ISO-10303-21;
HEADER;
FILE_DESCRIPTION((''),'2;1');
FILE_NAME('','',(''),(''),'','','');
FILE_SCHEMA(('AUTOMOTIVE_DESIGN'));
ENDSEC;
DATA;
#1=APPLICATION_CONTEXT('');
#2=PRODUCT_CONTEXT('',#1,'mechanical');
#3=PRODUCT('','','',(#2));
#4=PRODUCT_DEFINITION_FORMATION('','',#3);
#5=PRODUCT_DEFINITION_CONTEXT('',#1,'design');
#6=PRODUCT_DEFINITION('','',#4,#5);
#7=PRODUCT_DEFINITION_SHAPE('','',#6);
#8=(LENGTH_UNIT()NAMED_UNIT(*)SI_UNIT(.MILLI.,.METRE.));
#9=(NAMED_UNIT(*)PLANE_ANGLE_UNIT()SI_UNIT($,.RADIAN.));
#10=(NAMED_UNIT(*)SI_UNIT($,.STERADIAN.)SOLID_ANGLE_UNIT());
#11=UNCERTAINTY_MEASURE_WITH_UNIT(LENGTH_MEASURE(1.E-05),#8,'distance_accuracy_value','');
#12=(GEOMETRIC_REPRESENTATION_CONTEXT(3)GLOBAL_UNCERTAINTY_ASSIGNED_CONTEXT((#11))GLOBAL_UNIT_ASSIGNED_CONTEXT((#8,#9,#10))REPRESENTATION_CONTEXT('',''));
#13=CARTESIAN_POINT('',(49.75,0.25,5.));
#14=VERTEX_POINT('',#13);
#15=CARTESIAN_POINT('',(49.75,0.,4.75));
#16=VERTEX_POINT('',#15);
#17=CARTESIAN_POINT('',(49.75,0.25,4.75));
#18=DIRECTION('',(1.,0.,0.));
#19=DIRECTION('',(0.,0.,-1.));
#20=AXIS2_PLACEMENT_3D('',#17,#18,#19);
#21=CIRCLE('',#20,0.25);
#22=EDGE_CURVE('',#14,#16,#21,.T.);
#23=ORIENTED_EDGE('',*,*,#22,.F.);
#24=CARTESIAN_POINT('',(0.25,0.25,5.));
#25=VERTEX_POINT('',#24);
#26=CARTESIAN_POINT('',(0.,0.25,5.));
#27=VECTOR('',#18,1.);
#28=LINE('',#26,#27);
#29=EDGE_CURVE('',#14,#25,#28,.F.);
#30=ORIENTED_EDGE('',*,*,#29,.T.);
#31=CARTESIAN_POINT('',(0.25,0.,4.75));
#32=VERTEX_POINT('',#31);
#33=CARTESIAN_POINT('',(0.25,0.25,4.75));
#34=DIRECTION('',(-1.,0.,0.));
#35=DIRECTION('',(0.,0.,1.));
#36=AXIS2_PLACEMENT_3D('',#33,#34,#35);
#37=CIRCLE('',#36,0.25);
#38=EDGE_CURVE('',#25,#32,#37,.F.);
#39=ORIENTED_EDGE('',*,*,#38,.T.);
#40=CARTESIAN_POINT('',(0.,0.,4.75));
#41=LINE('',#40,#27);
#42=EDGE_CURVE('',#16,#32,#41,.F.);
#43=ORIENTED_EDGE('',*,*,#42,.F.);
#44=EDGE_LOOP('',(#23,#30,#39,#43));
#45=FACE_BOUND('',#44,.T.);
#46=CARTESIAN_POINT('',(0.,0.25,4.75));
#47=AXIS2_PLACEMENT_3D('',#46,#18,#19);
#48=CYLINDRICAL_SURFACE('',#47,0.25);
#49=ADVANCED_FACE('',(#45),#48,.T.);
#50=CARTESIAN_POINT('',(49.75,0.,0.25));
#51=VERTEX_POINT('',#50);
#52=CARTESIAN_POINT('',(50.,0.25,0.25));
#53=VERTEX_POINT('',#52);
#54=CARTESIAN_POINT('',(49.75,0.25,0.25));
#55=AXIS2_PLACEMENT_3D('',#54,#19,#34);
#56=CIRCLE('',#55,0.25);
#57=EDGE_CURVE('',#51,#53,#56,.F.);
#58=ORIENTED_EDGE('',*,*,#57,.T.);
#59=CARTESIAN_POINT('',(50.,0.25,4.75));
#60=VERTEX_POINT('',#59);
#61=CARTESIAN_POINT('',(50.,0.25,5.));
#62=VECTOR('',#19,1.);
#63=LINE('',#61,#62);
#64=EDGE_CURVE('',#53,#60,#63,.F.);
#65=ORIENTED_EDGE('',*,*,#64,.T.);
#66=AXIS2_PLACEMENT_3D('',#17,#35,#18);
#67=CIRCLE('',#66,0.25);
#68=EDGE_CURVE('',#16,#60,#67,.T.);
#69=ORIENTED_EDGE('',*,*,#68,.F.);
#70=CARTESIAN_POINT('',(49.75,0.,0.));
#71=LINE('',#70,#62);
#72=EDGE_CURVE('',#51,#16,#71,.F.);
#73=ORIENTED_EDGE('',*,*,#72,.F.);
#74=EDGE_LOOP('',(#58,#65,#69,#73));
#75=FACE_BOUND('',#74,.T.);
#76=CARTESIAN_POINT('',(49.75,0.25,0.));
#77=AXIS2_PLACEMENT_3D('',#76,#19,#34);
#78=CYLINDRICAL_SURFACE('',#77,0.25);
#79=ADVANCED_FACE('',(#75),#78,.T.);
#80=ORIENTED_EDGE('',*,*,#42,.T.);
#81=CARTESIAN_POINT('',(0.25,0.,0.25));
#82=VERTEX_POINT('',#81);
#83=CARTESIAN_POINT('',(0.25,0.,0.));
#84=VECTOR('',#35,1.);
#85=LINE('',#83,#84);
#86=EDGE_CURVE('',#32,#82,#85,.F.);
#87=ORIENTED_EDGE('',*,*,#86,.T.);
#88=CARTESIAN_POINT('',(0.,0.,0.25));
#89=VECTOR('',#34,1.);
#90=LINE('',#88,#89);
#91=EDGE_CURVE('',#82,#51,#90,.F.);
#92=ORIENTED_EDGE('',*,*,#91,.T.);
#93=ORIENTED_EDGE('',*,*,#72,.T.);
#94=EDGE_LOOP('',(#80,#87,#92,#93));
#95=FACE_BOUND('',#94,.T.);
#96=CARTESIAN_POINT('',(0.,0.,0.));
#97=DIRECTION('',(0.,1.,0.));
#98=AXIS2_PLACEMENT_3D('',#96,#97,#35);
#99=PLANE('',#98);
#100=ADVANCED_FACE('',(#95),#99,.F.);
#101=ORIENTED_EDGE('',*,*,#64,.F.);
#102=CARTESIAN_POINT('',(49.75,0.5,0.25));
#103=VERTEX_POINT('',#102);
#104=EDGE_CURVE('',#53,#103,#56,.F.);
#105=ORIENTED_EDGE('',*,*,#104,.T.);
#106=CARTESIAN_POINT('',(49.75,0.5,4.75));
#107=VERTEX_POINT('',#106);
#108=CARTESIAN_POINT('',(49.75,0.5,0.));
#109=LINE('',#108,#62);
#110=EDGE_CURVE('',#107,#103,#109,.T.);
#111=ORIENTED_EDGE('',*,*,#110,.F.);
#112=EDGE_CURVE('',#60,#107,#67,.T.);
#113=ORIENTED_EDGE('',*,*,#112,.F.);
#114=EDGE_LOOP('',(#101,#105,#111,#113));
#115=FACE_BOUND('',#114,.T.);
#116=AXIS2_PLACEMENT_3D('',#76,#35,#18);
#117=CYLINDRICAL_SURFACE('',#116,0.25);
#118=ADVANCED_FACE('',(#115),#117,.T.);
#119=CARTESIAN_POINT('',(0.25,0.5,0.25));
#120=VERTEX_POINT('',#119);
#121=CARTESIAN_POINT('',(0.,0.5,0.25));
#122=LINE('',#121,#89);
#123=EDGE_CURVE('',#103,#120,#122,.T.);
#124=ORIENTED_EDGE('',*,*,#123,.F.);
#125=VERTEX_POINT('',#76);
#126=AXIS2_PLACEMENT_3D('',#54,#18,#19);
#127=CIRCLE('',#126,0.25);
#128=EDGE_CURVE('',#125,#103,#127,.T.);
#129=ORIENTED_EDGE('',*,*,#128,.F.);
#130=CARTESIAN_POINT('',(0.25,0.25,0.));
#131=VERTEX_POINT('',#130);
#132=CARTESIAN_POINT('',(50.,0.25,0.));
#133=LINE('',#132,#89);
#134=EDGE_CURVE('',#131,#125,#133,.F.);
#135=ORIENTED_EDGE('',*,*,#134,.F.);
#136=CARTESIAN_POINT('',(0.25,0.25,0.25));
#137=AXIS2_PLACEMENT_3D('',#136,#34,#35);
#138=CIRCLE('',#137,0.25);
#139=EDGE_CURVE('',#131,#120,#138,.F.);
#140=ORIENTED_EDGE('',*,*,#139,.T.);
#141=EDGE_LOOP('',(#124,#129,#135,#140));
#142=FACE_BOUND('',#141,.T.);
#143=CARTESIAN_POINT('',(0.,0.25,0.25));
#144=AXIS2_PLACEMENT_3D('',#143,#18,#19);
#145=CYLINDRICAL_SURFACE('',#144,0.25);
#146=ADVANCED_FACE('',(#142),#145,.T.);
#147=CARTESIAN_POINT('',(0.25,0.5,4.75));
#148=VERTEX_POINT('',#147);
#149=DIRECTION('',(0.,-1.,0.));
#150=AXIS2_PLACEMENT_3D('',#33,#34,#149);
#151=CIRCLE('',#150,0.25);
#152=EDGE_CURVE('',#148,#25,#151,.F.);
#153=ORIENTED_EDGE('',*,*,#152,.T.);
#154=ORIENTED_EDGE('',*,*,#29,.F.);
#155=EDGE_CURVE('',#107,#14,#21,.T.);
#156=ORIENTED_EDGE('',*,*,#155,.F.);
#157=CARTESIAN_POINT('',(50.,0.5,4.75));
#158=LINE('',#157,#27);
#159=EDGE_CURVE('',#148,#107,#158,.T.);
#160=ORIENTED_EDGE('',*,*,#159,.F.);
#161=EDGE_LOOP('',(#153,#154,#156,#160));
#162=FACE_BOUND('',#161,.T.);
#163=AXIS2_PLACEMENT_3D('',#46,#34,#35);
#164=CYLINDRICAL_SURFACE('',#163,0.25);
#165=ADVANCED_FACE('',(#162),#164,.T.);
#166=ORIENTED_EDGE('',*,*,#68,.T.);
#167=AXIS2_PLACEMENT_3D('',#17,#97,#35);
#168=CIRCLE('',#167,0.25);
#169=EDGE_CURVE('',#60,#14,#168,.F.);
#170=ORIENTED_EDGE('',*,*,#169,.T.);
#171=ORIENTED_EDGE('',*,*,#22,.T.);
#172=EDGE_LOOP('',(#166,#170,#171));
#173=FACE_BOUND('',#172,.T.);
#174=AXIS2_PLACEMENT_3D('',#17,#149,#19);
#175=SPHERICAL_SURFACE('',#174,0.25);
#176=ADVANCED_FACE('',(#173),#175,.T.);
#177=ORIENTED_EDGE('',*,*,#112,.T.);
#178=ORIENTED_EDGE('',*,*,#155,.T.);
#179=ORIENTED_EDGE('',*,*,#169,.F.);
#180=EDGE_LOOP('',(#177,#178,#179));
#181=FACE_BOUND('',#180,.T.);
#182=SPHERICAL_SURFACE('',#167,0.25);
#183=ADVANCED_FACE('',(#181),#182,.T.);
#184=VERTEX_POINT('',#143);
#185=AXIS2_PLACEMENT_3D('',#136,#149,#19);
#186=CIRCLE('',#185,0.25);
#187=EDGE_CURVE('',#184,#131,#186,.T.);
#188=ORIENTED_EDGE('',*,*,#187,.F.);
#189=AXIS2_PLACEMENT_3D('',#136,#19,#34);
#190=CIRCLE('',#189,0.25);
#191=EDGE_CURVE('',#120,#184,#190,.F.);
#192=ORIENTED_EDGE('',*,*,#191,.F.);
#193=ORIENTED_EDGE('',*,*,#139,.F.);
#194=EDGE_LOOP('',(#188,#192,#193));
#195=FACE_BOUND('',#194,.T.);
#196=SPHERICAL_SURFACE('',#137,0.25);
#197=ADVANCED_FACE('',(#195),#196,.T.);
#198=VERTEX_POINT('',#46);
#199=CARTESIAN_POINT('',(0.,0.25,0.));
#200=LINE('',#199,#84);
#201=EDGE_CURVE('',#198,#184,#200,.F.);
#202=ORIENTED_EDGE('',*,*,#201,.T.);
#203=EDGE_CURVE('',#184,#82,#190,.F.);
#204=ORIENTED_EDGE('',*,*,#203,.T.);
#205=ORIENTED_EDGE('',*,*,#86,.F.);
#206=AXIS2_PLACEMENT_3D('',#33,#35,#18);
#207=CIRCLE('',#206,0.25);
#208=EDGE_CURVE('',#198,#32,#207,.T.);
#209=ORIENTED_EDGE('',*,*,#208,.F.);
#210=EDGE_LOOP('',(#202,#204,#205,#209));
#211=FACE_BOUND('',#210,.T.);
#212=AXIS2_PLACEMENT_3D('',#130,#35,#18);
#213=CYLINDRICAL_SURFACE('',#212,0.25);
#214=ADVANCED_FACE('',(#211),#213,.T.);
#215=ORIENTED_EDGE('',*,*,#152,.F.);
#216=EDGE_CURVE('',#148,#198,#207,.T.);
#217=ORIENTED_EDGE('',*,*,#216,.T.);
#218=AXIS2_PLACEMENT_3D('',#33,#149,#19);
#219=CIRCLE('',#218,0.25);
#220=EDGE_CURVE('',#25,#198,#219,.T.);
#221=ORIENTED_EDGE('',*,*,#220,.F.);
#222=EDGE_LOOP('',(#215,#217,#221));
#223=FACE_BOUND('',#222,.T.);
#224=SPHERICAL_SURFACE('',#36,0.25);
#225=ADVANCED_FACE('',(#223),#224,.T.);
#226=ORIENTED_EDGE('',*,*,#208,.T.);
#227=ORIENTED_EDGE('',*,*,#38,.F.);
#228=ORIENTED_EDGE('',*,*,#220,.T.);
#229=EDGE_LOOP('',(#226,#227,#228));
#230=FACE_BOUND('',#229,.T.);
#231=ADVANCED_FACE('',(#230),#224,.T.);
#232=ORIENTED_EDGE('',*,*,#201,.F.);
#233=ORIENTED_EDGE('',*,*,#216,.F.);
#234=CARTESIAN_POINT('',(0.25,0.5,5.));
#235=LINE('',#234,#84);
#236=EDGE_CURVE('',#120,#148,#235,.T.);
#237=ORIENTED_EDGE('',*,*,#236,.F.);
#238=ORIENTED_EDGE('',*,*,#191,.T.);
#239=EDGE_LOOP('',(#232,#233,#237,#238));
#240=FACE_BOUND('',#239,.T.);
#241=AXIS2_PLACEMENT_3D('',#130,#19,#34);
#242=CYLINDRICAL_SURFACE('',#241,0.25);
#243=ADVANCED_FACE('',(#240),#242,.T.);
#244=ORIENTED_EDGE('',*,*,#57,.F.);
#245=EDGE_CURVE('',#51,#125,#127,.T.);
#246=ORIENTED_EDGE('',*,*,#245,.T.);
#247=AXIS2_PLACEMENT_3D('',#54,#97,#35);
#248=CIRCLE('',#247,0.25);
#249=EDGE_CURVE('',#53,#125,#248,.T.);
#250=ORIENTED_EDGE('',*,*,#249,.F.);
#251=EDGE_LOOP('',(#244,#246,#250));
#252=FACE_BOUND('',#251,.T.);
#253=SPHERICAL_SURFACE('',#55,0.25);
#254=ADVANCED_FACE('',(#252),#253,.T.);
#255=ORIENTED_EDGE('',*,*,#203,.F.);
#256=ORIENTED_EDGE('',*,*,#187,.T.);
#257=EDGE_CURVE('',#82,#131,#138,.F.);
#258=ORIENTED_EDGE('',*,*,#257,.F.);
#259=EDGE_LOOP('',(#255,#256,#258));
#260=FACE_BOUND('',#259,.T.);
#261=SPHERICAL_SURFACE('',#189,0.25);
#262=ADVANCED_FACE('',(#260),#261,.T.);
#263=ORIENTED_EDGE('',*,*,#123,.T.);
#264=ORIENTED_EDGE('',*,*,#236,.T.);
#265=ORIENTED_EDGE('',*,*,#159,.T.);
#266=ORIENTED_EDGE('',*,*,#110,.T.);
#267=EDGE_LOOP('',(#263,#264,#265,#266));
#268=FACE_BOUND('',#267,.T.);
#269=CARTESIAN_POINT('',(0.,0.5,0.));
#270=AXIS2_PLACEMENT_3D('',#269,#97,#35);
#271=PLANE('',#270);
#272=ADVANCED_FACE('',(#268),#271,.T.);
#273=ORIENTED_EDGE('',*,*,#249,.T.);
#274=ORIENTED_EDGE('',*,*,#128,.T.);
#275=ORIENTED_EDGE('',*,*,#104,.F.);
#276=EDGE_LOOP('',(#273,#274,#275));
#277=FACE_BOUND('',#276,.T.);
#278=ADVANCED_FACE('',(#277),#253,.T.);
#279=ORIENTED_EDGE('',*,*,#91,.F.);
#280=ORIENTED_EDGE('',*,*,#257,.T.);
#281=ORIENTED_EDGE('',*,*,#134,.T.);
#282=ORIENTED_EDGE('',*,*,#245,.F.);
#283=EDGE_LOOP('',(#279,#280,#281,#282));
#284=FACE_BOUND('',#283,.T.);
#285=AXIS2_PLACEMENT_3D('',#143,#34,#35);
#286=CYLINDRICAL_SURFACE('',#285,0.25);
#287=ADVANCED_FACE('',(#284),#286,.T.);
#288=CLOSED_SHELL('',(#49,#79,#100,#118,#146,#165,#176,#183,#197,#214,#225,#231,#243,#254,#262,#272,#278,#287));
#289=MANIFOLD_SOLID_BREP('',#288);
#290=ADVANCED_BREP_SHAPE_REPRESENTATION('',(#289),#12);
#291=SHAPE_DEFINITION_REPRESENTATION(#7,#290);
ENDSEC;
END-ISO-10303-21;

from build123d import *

# Parameters (mm, degrees)
SKETCH1_W           = 50
SKETCH1_H           = 5
BOSS_EXTRUDE1_DEPTH = 0.5
FILLET3_R           = 0.25


with BuildPart() as part:
    # Sketch1 → Boss-Extrude1 (new body)
    with BuildSketch(Plane(origin=(0, 0, 0), x_dir=(1, 0, 0), z_dir=(0, 1, 0))):
        with Locations((25, -2.5)):
            Rectangle(SKETCH1_W, SKETCH1_H)
    extrude(amount=BOSS_EXTRUDE1_DEPTH)

    # Fillet3
    fillet3_edges = [part.edges().sort_by_distance(p)[0] for p in [
        (50, 0.5, 2.5),
        (25, 0.5, 0),
        (0, 0.5, 2.5),
        (25, 0, 0),
        (50, 0, 2.5),
        (25, 0, 5),
        (0, 0, 2.5),
        (0, 0.25, 0),
        (50, 0.25, 0),
        (50, 0.25, 5),
        (0, 0.25, 5),
        (25, 0.5, 5),
    ]]
    fillet(fillet3_edges, radius=FILLET3_R - 0.0001)  # a hair under: the kernel refuses the full size


solid = part.part
